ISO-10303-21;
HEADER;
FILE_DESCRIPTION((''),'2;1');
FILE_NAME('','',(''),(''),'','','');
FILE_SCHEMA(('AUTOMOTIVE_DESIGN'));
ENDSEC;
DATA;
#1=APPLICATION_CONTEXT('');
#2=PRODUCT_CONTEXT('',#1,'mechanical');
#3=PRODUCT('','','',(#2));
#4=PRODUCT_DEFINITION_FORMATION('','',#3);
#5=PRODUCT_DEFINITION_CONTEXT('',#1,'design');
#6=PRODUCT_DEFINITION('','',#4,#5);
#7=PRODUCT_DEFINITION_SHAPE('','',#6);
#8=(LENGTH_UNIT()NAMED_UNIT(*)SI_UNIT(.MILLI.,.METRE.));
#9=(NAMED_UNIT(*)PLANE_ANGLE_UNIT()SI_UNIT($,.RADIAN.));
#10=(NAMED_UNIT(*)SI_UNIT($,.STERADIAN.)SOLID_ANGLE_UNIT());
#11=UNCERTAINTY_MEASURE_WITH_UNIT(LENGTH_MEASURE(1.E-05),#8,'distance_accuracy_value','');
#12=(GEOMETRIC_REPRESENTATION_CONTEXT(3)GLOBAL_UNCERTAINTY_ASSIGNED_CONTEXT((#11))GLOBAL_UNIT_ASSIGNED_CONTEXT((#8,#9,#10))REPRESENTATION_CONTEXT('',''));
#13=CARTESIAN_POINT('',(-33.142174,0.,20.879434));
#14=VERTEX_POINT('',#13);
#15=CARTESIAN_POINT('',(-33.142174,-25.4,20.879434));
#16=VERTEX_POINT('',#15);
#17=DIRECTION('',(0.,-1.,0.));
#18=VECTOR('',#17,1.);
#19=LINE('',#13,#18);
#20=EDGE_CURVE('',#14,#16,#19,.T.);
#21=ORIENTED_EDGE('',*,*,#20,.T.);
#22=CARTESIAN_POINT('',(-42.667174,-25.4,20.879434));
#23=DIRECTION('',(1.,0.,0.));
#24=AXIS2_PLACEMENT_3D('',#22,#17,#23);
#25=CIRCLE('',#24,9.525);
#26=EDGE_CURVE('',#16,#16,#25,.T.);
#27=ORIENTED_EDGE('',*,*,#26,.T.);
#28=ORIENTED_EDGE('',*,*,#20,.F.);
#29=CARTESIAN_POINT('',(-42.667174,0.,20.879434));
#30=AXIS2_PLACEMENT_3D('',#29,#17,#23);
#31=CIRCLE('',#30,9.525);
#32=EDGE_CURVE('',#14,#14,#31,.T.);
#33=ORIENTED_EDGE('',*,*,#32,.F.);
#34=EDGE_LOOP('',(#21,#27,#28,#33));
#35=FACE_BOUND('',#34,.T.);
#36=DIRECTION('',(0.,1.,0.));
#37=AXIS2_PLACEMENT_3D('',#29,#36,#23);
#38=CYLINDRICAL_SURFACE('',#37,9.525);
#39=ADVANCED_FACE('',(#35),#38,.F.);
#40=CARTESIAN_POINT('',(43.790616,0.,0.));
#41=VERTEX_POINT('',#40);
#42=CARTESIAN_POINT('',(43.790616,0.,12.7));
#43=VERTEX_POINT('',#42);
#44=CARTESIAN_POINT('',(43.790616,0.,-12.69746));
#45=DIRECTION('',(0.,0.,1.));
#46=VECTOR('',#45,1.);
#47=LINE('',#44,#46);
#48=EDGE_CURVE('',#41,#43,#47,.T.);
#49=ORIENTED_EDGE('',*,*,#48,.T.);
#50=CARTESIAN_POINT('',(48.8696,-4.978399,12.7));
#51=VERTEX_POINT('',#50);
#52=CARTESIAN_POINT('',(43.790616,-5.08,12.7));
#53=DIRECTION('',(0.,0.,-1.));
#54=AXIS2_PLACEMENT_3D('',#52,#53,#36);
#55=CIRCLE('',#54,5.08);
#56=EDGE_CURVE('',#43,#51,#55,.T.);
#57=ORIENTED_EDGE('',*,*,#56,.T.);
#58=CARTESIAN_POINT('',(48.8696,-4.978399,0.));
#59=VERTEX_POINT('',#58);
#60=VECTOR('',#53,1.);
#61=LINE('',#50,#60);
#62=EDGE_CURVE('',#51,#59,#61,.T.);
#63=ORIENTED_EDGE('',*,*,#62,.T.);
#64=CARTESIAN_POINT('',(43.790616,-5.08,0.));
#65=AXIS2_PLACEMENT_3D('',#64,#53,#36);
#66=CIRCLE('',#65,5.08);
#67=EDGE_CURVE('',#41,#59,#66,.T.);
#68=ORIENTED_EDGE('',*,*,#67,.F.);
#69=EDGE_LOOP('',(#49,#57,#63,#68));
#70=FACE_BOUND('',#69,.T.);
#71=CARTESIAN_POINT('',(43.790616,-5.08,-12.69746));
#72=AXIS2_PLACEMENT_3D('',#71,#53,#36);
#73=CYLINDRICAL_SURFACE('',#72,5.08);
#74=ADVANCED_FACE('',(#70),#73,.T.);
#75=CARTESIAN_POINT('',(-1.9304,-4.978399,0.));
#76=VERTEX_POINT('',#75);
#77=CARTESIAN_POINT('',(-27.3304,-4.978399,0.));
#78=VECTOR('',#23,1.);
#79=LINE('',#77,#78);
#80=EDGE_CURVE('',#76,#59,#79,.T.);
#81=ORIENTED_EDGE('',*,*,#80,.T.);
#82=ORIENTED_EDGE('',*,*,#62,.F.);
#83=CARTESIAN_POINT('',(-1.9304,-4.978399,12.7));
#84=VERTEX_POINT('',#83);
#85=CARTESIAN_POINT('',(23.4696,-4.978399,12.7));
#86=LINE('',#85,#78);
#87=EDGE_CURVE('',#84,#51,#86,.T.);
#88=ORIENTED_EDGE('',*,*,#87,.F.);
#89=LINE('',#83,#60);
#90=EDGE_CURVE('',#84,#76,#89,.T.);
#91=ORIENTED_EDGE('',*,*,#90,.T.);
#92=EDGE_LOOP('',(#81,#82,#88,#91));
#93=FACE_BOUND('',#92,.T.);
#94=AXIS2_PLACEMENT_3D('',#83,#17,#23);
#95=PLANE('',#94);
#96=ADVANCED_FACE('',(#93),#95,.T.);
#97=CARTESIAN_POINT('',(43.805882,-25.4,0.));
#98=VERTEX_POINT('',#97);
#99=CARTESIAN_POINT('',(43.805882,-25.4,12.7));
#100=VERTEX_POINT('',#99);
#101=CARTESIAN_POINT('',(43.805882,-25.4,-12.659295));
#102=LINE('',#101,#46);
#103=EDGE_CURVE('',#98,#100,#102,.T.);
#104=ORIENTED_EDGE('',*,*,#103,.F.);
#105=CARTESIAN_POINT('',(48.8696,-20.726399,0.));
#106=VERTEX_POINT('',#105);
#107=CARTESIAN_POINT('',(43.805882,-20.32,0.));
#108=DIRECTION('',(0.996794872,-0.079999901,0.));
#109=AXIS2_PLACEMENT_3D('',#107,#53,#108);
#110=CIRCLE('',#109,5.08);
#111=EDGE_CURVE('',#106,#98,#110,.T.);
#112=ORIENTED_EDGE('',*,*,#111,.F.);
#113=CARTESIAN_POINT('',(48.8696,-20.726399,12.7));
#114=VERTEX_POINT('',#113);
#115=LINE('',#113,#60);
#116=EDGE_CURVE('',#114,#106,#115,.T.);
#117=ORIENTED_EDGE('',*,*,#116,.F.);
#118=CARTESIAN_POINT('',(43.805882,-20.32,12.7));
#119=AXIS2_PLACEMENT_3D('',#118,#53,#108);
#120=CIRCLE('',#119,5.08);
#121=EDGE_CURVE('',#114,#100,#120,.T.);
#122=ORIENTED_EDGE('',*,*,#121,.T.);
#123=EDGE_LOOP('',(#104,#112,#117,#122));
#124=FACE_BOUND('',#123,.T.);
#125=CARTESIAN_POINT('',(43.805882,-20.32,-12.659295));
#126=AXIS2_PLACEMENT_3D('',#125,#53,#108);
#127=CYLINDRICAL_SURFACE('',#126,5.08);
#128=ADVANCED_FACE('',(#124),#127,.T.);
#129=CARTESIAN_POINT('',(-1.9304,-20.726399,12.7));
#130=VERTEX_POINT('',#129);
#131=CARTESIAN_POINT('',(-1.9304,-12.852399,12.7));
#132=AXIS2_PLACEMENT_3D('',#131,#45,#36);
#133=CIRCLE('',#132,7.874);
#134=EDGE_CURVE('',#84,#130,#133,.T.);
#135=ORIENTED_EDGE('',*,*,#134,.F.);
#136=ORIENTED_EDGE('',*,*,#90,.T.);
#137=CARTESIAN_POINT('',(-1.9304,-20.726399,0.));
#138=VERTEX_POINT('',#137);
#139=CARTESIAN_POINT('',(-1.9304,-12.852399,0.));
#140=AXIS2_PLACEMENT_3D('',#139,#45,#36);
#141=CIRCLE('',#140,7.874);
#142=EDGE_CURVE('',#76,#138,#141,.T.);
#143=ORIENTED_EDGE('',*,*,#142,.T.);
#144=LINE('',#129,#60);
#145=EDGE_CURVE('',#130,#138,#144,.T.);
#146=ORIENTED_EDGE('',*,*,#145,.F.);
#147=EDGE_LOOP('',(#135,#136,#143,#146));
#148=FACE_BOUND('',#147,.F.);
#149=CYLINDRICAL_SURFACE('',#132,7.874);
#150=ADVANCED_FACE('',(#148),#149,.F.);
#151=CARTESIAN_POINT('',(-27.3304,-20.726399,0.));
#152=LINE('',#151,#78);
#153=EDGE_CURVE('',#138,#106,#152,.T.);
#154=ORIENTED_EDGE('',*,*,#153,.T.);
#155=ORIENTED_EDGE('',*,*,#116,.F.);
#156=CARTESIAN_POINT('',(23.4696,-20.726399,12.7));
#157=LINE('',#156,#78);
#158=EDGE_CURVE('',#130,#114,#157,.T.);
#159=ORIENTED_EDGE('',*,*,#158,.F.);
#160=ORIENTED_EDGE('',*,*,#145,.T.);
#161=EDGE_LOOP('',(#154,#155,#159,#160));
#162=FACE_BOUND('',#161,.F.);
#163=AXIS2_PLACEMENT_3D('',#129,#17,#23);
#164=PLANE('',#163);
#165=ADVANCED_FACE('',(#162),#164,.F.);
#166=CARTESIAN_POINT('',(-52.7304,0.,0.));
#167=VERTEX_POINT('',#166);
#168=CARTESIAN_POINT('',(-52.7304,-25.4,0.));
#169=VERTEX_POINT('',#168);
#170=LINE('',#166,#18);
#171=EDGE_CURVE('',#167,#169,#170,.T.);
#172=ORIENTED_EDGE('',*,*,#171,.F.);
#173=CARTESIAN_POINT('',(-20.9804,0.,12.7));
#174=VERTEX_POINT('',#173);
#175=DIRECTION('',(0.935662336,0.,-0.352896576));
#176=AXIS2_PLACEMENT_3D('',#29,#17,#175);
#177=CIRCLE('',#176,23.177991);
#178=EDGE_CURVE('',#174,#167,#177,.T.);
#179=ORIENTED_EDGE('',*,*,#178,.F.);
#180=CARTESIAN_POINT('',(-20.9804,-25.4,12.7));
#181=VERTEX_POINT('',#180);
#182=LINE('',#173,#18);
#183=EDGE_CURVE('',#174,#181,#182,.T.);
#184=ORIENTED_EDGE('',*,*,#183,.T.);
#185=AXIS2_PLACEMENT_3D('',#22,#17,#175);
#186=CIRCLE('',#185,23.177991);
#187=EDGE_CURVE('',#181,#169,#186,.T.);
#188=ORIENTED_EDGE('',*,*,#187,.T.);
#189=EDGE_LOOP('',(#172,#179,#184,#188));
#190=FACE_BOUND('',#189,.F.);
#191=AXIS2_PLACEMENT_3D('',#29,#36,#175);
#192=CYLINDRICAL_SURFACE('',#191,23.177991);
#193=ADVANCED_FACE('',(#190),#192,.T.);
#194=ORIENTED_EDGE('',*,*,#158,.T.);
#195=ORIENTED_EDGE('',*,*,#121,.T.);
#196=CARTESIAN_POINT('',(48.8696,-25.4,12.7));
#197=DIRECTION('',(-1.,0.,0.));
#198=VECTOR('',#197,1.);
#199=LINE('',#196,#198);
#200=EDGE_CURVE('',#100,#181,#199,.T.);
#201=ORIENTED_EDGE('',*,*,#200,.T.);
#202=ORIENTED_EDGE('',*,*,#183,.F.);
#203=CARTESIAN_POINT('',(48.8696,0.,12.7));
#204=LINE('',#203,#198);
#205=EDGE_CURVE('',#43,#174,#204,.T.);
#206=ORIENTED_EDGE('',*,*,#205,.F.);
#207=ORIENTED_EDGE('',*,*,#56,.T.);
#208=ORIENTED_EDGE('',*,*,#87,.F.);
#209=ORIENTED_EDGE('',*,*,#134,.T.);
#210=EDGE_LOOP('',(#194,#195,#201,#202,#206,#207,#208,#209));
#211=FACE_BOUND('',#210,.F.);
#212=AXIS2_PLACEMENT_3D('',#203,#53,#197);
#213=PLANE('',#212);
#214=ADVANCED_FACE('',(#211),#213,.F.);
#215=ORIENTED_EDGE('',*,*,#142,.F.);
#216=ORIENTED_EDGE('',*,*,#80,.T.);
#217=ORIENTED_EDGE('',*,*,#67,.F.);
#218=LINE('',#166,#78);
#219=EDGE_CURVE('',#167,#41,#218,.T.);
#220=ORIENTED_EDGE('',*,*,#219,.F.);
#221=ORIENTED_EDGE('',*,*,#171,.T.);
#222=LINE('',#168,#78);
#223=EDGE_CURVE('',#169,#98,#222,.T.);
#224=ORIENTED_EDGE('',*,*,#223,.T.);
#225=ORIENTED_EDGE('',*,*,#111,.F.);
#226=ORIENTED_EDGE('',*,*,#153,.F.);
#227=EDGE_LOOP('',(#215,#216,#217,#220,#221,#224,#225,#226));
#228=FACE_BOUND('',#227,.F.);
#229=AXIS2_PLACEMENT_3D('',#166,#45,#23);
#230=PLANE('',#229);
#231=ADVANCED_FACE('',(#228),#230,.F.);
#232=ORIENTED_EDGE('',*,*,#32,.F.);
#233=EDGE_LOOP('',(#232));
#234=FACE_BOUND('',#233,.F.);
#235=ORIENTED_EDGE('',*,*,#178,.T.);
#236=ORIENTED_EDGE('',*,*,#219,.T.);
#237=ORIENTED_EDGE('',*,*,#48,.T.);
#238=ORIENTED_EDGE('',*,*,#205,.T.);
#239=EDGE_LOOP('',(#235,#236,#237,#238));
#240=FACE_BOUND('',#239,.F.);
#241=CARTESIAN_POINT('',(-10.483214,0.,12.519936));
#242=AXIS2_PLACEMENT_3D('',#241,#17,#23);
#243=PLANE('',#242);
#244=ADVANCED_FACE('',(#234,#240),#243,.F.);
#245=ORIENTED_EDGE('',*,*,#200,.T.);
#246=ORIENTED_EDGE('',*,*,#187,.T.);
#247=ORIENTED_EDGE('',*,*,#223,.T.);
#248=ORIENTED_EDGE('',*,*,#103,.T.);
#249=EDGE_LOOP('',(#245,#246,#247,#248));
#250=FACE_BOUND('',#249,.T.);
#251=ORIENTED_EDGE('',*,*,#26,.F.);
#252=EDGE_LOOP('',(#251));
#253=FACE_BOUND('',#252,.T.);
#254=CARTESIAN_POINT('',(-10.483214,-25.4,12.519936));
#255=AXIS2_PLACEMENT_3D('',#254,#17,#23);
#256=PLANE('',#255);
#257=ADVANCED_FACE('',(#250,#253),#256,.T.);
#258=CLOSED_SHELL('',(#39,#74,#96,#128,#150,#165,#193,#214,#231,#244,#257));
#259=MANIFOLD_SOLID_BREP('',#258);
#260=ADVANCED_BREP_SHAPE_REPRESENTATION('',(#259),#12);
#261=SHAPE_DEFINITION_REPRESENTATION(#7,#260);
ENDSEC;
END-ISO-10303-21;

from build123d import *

# Parameters (mm, degrees)
F0_R        = 9.525
F2_DEPTH    = 25.4
F3_W        = 50.8
F3_H        = 15.748
F4_DEPTH    = 25.4
F5_T1_DEPTH = 38.0949194415
F5_T3_DEPTH = 38.0185897363


# Not quite as in the source:
# - a fillet or chamfer that OpenCascade refuses, or shapes differently, is made with other operations: its cross-section is extruded or revolved along the edge and cut away or added


with BuildPart() as f2:
    # F0 (on Front) → F2 (new body)
    with BuildSketch(Plane.XZ):
        with BuildLine():
            ThreePointArc((-20.9804001153, 12.7), (-51.2752635033, 42.3996584702), (-52.7304001153, 0))
            Line((-52.7304001153, 0), (48.8695998847, 0))
            Line((48.8695998847, 0), (48.8695998847, 12.7))
            Line((48.8695998847, 12.7), (-20.9804001153, 12.7))
        make_face()
        with Locations((-42.6671736259, 20.8794337765)):
            Circle(F0_R, mode=Mode.SUBTRACT)
    extrude(amount=F2_DEPTH)

    # F3 (on face) → F4 (cut)
    with BuildSketch(Plane.XY.offset(12.7)):
        with Locations((23.4695998847, -12.8523994962)):
            Rectangle(F3_W, F3_H)
        with BuildLine():
            ThreePointArc((-1.9304001153, -4.9783994962), (-9.8044001153, -12.8523994962), (-1.9304001153, -20.7263994962))
            Line((-1.9304001153, -20.7263994962), (-1.9304001153, -4.9783994962))
        make_face()
    extrude(amount=-F4_DEPTH, mode=Mode.SUBTRACT)

    # F5: fillet of radius 5.08 on 2 edges, made by hand

    # F5_s2 → F5_t1 (cut)
    with BuildSketch(Plane.XY.offset(-12.6974597208)):
        with BuildLine():
            ThreePointArc((43.7906159964, 0), (47.3466158165, -1.4521541819), (48.8695998847, -4.9783994962))
            Line((48.8695998847, -4.9783994962), (48.8695998847, 0))
            Line((48.8695998847, 0), (43.7906159964, 0))
        make_face()
    extrude(amount=F5_T1_DEPTH, mode=Mode.SUBTRACT)

    # F5_s4 → F5_t3 (cut)
    with BuildSketch(Plane.XY.offset(-12.6592948682)):
        with BuildLine():
            ThreePointArc((48.8695998847, -20.7263994962), (47.2513057546, -24.0530221966), (43.8058819375, -25.4))
            Line((43.8058819375, -25.4), (48.8695998847, -25.4))
            Line((48.8695998847, -25.4), (48.8695998847, -20.7263994962))
        make_face()
    extrude(amount=F5_T3_DEPTH, mode=Mode.SUBTRACT)


solid = f2.part
